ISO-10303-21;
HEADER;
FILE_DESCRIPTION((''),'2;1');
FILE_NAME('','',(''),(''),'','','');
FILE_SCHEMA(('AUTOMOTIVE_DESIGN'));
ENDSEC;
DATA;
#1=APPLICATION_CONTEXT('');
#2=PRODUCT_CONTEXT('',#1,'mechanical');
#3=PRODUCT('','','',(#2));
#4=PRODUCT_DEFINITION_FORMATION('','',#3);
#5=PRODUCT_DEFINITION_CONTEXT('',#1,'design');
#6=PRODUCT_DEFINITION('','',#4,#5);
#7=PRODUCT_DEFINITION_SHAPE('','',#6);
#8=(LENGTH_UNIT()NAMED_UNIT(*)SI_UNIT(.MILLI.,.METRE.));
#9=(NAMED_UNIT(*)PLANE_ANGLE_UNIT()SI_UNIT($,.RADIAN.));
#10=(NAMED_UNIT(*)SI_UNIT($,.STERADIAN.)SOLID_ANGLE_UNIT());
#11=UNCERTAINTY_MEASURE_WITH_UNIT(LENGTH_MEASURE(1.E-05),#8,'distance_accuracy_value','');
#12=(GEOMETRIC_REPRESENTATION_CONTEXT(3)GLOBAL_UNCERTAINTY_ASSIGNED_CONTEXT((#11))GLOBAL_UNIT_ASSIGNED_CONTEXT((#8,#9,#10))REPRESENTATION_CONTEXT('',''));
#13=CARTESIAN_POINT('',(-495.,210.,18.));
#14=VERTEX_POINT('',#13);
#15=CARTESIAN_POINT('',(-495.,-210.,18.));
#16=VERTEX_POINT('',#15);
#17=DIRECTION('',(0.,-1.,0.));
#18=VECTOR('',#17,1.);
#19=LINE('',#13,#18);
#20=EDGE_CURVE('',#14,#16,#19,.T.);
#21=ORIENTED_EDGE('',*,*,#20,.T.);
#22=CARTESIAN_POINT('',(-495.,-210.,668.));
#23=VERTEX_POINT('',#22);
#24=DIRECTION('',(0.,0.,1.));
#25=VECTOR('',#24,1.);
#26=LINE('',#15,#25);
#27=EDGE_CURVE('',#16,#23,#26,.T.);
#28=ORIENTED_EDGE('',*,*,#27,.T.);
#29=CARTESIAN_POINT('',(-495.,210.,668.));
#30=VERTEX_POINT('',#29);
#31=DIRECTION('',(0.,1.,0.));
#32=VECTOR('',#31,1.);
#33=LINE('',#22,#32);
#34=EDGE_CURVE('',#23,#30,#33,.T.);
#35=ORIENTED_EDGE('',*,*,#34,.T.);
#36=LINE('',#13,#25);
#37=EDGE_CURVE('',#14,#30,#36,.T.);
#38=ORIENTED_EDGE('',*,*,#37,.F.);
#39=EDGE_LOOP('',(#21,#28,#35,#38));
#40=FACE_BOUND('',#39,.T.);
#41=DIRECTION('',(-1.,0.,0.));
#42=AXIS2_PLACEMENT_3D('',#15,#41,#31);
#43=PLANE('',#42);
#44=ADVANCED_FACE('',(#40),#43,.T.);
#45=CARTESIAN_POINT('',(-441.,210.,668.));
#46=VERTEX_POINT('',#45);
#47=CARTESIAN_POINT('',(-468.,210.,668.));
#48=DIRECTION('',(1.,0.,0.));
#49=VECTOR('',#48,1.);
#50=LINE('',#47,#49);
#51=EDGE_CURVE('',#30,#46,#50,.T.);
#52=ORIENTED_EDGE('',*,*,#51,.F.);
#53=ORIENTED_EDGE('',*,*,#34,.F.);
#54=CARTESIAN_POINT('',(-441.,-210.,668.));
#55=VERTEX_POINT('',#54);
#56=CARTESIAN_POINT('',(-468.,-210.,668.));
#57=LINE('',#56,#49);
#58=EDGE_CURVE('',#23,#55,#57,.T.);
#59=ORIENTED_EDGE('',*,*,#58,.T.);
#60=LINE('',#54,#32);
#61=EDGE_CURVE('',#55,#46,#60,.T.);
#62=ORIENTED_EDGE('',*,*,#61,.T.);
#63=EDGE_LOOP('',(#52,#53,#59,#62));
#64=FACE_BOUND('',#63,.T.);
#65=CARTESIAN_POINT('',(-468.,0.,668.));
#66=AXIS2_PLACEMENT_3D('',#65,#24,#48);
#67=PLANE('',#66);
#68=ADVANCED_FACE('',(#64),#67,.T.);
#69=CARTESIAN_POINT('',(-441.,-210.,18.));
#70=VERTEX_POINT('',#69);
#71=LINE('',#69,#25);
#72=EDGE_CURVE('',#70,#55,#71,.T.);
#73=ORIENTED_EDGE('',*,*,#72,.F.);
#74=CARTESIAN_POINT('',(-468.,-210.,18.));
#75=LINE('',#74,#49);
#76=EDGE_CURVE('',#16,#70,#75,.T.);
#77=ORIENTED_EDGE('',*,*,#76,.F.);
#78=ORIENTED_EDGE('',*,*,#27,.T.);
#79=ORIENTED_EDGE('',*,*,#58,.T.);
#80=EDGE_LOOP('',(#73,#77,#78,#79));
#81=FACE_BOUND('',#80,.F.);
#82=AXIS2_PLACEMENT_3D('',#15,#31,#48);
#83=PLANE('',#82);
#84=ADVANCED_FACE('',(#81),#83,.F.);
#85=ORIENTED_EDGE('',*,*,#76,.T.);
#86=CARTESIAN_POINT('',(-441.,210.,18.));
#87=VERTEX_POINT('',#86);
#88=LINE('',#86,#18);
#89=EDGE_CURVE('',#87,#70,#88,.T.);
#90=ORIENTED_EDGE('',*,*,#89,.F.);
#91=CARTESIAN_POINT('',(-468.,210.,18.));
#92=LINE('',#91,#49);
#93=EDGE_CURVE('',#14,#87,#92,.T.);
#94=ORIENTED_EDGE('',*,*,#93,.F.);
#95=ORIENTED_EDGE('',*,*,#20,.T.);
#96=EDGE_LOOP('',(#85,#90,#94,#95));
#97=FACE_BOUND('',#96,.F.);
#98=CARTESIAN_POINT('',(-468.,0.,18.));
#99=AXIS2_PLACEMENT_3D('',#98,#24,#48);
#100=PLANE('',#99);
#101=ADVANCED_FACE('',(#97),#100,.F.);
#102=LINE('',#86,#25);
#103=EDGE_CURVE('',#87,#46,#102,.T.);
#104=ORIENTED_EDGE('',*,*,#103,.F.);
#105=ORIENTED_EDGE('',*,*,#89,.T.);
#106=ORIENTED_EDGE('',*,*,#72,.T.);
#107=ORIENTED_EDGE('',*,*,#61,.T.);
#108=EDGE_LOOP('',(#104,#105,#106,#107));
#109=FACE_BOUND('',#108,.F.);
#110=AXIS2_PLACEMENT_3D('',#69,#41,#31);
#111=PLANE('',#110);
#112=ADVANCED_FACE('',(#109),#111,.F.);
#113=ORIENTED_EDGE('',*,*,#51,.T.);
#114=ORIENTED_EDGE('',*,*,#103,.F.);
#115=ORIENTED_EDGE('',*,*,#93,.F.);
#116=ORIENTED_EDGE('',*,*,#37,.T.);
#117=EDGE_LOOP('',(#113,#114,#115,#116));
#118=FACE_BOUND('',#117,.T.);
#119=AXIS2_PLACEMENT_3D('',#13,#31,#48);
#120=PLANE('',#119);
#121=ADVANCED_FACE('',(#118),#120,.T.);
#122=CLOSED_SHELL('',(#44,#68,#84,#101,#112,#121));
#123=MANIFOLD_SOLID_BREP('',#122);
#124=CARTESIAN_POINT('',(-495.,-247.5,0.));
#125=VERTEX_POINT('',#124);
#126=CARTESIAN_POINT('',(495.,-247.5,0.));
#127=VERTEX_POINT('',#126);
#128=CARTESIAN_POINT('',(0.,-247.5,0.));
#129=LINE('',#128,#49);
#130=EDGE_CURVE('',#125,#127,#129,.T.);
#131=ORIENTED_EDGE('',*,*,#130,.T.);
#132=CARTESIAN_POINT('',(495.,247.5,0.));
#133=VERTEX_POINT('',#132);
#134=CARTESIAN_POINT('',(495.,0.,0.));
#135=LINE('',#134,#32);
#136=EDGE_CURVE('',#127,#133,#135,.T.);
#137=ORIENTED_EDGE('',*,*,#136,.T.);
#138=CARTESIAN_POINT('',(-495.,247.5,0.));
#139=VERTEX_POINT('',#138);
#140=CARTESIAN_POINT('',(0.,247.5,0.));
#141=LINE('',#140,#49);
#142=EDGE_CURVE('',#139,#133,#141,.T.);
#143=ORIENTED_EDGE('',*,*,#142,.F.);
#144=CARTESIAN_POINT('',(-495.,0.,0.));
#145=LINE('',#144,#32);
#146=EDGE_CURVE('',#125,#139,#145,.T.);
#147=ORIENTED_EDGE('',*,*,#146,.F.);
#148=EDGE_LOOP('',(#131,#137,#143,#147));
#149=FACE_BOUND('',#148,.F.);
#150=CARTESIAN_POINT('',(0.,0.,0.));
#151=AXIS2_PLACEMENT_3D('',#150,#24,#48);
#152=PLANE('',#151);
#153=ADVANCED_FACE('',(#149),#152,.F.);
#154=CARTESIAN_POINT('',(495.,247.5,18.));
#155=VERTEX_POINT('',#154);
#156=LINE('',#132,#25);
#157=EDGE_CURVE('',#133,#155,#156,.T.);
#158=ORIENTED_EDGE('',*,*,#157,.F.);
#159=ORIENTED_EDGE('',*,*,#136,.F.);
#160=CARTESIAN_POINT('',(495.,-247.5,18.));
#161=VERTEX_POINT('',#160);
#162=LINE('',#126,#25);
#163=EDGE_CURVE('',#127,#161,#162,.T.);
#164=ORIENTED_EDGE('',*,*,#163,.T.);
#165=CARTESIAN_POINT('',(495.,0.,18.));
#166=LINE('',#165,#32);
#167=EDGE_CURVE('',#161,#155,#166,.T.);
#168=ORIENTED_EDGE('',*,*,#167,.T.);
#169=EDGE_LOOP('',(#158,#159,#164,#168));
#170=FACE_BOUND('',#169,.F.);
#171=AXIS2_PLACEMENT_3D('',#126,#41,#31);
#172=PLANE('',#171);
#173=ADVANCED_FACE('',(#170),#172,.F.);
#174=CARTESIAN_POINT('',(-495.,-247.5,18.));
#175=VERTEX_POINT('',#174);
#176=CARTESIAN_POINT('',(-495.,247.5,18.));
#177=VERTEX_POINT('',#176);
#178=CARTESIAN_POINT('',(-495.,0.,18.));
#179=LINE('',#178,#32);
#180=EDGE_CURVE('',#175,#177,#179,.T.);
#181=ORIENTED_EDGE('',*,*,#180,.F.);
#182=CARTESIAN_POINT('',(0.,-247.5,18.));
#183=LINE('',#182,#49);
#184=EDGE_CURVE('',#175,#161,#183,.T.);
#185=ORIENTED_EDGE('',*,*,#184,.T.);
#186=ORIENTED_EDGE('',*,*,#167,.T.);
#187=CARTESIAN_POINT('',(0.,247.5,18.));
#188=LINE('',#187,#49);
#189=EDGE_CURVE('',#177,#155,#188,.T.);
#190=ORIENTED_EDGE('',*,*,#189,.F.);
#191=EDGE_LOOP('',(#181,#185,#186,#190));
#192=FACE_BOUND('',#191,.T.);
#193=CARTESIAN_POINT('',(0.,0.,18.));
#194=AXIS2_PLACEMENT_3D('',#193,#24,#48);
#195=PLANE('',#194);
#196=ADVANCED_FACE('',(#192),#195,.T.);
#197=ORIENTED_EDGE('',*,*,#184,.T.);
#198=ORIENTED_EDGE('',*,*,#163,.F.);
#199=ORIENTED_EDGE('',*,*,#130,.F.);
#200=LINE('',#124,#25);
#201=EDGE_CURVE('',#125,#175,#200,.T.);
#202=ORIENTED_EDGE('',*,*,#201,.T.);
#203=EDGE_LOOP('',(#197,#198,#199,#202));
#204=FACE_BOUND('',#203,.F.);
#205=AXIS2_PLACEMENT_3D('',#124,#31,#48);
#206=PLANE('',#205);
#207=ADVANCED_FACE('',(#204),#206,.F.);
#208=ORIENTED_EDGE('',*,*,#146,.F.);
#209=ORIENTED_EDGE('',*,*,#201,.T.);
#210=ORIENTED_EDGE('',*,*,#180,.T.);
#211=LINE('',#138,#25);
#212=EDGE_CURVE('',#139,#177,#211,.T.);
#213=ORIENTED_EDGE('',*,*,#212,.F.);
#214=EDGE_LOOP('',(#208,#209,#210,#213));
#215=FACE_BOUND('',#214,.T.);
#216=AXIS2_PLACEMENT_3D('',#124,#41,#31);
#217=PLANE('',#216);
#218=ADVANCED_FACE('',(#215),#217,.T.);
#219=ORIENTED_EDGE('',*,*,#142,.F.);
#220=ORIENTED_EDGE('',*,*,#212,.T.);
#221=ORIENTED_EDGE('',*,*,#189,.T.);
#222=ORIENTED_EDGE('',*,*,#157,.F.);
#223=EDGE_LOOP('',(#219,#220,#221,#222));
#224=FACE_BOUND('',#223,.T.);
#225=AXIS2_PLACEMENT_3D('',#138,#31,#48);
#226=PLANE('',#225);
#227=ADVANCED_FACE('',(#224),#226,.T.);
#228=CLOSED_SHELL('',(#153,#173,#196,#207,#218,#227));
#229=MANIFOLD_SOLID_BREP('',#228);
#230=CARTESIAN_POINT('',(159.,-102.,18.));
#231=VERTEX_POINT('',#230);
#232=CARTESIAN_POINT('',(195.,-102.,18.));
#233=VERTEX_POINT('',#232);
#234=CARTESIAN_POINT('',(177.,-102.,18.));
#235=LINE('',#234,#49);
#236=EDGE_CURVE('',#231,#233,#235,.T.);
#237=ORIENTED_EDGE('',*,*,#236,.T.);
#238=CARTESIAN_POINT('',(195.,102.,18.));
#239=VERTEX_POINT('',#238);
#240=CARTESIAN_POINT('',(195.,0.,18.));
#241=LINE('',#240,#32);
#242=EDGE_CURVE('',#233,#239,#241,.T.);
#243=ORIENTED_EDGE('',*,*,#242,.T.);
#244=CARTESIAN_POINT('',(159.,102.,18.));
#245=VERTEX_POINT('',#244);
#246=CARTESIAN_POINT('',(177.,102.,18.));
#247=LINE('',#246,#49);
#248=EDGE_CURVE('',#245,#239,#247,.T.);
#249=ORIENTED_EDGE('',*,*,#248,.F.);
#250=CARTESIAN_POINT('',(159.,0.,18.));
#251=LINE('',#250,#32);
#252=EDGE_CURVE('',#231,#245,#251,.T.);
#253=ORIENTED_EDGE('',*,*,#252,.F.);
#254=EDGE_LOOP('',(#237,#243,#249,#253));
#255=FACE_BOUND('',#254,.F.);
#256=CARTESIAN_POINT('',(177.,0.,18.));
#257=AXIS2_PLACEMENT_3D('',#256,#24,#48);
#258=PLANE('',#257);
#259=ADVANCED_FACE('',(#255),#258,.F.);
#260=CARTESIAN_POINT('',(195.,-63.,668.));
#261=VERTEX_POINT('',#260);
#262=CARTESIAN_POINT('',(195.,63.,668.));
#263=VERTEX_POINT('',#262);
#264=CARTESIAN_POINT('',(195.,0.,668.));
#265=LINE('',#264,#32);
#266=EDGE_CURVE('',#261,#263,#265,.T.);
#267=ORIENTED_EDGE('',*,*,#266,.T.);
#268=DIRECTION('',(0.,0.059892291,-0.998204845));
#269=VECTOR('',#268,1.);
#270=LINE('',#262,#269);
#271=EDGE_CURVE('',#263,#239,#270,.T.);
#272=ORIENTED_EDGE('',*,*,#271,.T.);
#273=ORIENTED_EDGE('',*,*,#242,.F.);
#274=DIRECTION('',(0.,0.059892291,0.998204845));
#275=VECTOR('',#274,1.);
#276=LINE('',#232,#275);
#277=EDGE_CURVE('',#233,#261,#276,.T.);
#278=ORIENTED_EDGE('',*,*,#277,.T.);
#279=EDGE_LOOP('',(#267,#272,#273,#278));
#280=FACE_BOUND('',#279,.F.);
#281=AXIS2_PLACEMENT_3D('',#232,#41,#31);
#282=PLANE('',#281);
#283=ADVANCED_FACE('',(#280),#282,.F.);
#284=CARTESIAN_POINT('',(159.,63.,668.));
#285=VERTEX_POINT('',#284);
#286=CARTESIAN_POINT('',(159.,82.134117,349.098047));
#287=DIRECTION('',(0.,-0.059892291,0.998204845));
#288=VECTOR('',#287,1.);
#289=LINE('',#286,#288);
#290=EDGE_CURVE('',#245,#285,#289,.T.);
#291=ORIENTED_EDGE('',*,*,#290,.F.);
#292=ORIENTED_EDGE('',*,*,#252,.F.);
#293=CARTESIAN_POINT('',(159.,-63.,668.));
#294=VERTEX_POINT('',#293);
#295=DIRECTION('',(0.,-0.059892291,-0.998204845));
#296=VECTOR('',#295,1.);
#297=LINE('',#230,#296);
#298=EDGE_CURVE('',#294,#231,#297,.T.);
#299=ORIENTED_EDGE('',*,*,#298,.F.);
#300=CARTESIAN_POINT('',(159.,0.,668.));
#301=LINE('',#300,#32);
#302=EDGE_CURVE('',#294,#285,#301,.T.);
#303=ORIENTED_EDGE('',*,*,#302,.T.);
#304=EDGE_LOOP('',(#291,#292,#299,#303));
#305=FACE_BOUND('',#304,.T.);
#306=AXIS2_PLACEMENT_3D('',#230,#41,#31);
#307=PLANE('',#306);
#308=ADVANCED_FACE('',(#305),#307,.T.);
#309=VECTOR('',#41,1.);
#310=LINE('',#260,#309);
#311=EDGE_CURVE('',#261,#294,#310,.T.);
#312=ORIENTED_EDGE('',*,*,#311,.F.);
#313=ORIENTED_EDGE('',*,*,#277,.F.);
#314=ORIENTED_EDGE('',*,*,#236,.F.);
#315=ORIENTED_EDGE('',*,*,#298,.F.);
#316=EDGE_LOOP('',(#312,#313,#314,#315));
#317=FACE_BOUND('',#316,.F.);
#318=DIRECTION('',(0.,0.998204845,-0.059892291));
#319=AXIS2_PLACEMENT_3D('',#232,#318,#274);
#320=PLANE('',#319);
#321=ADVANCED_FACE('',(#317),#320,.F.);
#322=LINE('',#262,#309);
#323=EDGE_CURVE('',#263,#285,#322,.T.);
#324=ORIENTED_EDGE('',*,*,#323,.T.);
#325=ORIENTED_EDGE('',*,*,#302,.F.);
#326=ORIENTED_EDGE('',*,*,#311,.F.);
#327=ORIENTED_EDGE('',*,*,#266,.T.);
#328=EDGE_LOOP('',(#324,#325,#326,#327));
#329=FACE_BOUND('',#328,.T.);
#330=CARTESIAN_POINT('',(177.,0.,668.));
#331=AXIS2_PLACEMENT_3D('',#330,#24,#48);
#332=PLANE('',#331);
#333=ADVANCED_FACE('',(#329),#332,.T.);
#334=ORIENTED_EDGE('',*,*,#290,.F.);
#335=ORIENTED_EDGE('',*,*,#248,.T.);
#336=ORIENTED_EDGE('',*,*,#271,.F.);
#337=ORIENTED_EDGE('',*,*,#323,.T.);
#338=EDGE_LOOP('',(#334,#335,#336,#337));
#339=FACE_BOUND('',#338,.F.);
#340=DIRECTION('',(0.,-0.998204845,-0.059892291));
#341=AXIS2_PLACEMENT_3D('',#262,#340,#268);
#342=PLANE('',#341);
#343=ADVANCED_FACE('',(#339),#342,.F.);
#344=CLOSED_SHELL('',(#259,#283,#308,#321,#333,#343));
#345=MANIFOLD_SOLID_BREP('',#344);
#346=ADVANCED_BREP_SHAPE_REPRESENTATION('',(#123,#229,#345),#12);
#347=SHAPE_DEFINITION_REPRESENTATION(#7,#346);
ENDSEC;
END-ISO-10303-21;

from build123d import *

# Parameters (mm, degrees)
F0_W     = 990
F0_H     = 495
F1_DEPTH = 18
F2_W     = 54
F2_H     = 420
F3_DEPTH = 650
F2_W_2   = 36
F2_H_2   = 204
F4_W     = 204
F4_H     = 650
F5_DEPTH = 690.001
F7_DEPTH = 650
F9_DEPTH = 40


# Not quite as in the source:
# - a feature names something its author has since deleted; it is built from what else it names


with BuildPart() as f1:
    # F0 (on Top) → F1 (new body)
    with BuildSketch(Plane.XY):
        Rectangle(F0_W, F0_H)
    extrude(amount=F1_DEPTH)


with BuildPart() as f3:
    # F2 (on face) → F3 (new body)
    with BuildSketch(Plane.XY.offset(18)):
        with Locations((-468, 0)):
            Rectangle(F2_W, F2_H)
    extrude(amount=F3_DEPTH)


with BuildPart() as f3b:
    # F2 (on face) → F3, piece 2 (new body)
    with BuildSketch(Plane.XY.offset(18)):
        with Locations((177, 0)):
            Rectangle(F2_W_2, F2_H_2)
    extrude(amount=F3_DEPTH)


with BuildPart() as f5_tool:
    # F4 (on face) → F5 (new body, through all)
    with BuildSketch(Plane.YZ.offset(195)):
        with Locations((0, 343)):
            Rectangle(F4_W, F4_H)
    extrude(amount=-F5_DEPTH)


with BuildPart() as f3_1:
    add(f3.part)

    # F5: cut by f5_tool
    add(f5_tool.part, mode=Mode.SUBTRACT)

    # F2 (on face) → F7 (join)
    with BuildSketch(Plane.XY.offset(18)):
        with Locations((-468, 0)):
            Rectangle(F2_W, F2_H)
    extrude(amount=F7_DEPTH)


with BuildPart() as f3b_1:
    add(f3b.part)

    # F5: cut by f5_tool
    add(f5_tool.part, mode=Mode.SUBTRACT)


with BuildPart() as f7:
    # F2 (on face) → F7, piece 2 (new body)
    with BuildSketch(Plane.XY.offset(18)):
        with Locations((177, 0)):
            Rectangle(F2_W_2, F2_H_2)
    extrude(amount=F7_DEPTH)

    # F8 (on face) → F9 (cut)
    with BuildSketch(Plane.YZ.offset(195)):
        Polygon((102, 668), (63, 668), (102, 18), align=None)
        Polygon((-102, 18), (-63, 668), (-102, 668), align=None)
    extrude(amount=-F9_DEPTH, mode=Mode.SUBTRACT)


solid = Compound([f1.part, f3_1.part, f7.part])
